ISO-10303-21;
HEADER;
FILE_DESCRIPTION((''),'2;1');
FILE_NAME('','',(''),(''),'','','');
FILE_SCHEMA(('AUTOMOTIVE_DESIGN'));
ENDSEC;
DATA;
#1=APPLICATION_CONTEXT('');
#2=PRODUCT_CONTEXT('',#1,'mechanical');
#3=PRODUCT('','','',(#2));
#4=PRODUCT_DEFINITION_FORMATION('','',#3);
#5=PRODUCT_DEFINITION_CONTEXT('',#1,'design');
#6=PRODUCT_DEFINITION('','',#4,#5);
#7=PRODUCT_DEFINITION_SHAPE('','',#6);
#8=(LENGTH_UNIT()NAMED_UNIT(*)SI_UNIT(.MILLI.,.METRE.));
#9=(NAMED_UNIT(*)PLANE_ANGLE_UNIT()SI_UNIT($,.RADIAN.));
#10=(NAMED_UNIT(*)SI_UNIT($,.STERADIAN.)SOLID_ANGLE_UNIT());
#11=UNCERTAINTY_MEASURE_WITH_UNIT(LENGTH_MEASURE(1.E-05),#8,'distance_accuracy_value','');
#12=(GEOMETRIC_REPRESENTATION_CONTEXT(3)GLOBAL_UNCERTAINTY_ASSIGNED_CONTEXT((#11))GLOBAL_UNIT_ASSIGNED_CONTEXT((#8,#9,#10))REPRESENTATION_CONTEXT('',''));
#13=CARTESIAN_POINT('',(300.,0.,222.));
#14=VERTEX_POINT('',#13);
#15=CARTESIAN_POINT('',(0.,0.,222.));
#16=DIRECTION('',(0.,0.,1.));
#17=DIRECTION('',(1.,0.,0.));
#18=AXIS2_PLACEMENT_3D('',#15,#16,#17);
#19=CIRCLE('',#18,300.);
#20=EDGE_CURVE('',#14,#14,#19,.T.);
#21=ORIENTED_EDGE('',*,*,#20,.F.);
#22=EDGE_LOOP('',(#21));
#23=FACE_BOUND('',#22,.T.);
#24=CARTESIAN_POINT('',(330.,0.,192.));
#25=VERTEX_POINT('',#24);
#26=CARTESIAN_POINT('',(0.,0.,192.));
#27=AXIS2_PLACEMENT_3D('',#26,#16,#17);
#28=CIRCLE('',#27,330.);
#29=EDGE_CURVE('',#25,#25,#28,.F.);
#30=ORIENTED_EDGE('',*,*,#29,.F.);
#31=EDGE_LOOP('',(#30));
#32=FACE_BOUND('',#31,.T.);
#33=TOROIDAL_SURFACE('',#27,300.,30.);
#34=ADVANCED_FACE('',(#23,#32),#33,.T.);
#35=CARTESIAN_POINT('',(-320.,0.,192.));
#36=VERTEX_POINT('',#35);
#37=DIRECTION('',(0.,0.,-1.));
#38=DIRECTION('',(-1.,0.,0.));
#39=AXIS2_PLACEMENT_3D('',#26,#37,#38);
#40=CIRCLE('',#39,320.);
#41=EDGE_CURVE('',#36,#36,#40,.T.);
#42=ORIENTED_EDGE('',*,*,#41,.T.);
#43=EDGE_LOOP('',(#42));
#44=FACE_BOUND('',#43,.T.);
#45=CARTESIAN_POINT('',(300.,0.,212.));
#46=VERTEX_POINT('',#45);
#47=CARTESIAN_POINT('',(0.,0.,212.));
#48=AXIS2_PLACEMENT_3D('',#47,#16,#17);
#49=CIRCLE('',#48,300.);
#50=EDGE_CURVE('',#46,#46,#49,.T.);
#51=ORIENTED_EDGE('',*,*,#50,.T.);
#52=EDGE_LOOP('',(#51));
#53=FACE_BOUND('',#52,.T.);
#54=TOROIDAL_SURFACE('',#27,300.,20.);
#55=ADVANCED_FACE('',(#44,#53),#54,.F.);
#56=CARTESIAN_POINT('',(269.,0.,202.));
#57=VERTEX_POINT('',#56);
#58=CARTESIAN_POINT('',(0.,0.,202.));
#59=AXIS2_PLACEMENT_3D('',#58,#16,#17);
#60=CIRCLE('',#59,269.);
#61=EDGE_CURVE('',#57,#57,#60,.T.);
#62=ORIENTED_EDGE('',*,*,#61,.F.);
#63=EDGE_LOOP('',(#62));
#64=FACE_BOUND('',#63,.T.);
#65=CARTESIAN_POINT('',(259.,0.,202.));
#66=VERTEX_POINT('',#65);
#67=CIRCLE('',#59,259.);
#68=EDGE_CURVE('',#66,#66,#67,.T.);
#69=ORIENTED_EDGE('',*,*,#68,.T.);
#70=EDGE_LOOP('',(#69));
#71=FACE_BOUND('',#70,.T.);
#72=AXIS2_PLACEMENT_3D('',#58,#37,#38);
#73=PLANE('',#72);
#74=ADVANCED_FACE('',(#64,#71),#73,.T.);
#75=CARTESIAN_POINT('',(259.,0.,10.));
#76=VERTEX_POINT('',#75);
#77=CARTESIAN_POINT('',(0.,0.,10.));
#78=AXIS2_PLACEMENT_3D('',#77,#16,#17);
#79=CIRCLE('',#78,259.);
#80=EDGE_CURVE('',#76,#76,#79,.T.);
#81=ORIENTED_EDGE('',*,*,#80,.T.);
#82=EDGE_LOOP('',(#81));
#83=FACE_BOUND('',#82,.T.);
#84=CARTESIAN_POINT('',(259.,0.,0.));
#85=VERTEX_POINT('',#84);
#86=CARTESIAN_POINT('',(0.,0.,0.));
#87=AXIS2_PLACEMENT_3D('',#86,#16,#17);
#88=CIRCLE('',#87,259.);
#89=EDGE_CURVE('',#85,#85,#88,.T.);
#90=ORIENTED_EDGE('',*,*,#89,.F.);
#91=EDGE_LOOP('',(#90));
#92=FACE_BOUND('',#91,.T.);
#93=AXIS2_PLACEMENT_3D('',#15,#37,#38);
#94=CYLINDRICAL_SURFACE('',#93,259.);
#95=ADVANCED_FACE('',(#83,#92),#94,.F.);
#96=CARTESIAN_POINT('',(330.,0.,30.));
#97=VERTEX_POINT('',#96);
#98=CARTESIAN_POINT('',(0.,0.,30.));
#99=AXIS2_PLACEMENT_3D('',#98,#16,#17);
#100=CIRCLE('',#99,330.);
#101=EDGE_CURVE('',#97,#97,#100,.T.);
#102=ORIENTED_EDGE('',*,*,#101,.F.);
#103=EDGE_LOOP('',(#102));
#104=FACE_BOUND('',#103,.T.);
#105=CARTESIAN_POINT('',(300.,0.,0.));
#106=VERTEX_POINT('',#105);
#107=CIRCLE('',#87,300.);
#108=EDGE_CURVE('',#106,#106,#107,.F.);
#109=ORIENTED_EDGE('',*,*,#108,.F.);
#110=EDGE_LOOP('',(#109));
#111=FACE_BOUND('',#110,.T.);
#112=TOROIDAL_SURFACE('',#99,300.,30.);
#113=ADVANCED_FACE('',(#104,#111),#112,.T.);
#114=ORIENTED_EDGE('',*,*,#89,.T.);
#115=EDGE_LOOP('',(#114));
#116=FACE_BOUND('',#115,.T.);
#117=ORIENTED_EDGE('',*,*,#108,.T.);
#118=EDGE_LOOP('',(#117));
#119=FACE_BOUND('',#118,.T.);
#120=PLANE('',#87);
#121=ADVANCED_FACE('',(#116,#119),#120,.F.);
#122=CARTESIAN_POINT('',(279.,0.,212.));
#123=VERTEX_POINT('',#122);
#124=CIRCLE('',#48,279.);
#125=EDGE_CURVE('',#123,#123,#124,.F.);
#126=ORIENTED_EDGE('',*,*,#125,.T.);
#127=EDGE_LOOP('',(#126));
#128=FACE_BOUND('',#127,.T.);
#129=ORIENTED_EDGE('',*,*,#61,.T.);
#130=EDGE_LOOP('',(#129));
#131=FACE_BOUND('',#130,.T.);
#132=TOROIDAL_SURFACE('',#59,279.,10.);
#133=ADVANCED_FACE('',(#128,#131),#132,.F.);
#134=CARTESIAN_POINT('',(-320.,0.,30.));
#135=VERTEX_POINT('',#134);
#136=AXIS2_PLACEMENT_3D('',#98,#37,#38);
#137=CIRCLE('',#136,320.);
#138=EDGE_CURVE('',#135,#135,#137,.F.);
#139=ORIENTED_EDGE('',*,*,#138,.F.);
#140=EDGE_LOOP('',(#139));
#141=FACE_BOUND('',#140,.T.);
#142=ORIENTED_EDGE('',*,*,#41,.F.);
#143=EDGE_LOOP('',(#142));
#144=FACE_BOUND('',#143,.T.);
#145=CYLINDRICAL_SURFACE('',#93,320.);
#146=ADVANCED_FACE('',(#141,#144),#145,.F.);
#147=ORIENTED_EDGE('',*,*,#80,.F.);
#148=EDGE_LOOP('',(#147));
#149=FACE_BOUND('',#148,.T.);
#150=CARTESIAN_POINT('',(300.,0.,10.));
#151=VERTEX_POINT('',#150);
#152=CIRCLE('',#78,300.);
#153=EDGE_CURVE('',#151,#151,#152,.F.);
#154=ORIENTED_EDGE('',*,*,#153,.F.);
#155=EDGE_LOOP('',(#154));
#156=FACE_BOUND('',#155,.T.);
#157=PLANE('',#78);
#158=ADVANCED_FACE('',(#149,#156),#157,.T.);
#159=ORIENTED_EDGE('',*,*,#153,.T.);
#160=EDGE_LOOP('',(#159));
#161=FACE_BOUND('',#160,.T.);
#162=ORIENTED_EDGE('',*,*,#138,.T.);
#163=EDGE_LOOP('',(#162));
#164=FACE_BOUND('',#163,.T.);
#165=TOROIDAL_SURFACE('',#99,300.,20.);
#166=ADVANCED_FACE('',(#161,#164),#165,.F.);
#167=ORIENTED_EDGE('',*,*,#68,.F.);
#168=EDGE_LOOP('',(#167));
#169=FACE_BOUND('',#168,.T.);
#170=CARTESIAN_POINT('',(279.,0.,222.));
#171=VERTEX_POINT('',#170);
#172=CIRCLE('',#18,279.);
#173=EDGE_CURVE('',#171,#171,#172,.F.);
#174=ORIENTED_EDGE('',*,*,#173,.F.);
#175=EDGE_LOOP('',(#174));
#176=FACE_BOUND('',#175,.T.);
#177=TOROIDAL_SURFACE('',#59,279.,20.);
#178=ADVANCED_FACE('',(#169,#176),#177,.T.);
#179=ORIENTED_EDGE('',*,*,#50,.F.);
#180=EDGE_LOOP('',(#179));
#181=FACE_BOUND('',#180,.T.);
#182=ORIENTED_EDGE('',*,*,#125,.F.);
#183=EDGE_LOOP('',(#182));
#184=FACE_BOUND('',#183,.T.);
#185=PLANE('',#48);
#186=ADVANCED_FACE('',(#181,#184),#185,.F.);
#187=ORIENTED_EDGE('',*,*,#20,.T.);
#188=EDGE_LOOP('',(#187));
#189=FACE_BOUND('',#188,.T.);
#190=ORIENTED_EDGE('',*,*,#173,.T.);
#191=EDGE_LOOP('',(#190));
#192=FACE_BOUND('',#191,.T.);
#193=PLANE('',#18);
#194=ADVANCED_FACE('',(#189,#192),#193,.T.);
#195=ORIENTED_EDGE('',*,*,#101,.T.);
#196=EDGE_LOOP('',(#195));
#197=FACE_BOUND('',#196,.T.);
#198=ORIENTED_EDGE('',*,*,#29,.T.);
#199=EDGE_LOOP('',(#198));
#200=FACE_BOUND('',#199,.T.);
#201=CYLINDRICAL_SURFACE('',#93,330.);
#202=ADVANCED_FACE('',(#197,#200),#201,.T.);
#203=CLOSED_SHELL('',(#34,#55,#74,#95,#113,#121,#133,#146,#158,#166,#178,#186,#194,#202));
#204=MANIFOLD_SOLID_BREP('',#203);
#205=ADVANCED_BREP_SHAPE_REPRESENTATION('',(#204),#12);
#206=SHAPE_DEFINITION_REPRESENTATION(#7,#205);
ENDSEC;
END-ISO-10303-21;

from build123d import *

# Parameters (mm, degrees)
SKETCH1_R           = 330
SKETCH1_R_2         = 259
BOSS_EXTRUDE1_DEPTH = 222
FILLET1_R           = 30
FILLET2_R           = 20


with BuildPart() as part:
    # Sketch1 → Boss-Extrude1 (new body)
    with BuildSketch(Plane.XY):
        Circle(SKETCH1_R)
        Circle(SKETCH1_R_2, mode=Mode.SUBTRACT)
    extrude(amount=BOSS_EXTRUDE1_DEPTH)

    # Fillet1
    fillet1_edges = [part.edges().sort_by_distance(p)[0] for p in [
        (-330, 0, 0),
        (-330, 0, 222),
    ]]
    fillet(fillet1_edges, radius=FILLET1_R)

    # Fillet2
    fillet2_edges = [part.edges().sort_by_distance(p)[0] for p in [
        (-259, 0, 222),
    ]]
    fillet(fillet2_edges, radius=FILLET2_R)

    # Shell2: read off the stored shape, not the designer's step
    # Shell2 outline → Shell2 (revolve, cut)
    with BuildSketch(Plane.XZ):
        with BuildLine():
            Line((269, 202), (259, 202))
            Line((259, 202), (259, 10))
            Line((259, 10), (300, 10))
            ThreePointArc((300, 10), (314.142135624, 15.857864376), (320, 30))
            Line((320, 30), (320, 192))
            ThreePointArc((320, 192), (314.142135624, 206.142135624), (300, 212))
            Line((300, 212), (279, 212))
            ThreePointArc((279, 212), (271.928932188, 209.071067812), (269, 202))
        make_face()
    revolve(axis=Axis((0, 0, 0), (0, 0, 1)), mode=Mode.SUBTRACT)


solid = part.part
